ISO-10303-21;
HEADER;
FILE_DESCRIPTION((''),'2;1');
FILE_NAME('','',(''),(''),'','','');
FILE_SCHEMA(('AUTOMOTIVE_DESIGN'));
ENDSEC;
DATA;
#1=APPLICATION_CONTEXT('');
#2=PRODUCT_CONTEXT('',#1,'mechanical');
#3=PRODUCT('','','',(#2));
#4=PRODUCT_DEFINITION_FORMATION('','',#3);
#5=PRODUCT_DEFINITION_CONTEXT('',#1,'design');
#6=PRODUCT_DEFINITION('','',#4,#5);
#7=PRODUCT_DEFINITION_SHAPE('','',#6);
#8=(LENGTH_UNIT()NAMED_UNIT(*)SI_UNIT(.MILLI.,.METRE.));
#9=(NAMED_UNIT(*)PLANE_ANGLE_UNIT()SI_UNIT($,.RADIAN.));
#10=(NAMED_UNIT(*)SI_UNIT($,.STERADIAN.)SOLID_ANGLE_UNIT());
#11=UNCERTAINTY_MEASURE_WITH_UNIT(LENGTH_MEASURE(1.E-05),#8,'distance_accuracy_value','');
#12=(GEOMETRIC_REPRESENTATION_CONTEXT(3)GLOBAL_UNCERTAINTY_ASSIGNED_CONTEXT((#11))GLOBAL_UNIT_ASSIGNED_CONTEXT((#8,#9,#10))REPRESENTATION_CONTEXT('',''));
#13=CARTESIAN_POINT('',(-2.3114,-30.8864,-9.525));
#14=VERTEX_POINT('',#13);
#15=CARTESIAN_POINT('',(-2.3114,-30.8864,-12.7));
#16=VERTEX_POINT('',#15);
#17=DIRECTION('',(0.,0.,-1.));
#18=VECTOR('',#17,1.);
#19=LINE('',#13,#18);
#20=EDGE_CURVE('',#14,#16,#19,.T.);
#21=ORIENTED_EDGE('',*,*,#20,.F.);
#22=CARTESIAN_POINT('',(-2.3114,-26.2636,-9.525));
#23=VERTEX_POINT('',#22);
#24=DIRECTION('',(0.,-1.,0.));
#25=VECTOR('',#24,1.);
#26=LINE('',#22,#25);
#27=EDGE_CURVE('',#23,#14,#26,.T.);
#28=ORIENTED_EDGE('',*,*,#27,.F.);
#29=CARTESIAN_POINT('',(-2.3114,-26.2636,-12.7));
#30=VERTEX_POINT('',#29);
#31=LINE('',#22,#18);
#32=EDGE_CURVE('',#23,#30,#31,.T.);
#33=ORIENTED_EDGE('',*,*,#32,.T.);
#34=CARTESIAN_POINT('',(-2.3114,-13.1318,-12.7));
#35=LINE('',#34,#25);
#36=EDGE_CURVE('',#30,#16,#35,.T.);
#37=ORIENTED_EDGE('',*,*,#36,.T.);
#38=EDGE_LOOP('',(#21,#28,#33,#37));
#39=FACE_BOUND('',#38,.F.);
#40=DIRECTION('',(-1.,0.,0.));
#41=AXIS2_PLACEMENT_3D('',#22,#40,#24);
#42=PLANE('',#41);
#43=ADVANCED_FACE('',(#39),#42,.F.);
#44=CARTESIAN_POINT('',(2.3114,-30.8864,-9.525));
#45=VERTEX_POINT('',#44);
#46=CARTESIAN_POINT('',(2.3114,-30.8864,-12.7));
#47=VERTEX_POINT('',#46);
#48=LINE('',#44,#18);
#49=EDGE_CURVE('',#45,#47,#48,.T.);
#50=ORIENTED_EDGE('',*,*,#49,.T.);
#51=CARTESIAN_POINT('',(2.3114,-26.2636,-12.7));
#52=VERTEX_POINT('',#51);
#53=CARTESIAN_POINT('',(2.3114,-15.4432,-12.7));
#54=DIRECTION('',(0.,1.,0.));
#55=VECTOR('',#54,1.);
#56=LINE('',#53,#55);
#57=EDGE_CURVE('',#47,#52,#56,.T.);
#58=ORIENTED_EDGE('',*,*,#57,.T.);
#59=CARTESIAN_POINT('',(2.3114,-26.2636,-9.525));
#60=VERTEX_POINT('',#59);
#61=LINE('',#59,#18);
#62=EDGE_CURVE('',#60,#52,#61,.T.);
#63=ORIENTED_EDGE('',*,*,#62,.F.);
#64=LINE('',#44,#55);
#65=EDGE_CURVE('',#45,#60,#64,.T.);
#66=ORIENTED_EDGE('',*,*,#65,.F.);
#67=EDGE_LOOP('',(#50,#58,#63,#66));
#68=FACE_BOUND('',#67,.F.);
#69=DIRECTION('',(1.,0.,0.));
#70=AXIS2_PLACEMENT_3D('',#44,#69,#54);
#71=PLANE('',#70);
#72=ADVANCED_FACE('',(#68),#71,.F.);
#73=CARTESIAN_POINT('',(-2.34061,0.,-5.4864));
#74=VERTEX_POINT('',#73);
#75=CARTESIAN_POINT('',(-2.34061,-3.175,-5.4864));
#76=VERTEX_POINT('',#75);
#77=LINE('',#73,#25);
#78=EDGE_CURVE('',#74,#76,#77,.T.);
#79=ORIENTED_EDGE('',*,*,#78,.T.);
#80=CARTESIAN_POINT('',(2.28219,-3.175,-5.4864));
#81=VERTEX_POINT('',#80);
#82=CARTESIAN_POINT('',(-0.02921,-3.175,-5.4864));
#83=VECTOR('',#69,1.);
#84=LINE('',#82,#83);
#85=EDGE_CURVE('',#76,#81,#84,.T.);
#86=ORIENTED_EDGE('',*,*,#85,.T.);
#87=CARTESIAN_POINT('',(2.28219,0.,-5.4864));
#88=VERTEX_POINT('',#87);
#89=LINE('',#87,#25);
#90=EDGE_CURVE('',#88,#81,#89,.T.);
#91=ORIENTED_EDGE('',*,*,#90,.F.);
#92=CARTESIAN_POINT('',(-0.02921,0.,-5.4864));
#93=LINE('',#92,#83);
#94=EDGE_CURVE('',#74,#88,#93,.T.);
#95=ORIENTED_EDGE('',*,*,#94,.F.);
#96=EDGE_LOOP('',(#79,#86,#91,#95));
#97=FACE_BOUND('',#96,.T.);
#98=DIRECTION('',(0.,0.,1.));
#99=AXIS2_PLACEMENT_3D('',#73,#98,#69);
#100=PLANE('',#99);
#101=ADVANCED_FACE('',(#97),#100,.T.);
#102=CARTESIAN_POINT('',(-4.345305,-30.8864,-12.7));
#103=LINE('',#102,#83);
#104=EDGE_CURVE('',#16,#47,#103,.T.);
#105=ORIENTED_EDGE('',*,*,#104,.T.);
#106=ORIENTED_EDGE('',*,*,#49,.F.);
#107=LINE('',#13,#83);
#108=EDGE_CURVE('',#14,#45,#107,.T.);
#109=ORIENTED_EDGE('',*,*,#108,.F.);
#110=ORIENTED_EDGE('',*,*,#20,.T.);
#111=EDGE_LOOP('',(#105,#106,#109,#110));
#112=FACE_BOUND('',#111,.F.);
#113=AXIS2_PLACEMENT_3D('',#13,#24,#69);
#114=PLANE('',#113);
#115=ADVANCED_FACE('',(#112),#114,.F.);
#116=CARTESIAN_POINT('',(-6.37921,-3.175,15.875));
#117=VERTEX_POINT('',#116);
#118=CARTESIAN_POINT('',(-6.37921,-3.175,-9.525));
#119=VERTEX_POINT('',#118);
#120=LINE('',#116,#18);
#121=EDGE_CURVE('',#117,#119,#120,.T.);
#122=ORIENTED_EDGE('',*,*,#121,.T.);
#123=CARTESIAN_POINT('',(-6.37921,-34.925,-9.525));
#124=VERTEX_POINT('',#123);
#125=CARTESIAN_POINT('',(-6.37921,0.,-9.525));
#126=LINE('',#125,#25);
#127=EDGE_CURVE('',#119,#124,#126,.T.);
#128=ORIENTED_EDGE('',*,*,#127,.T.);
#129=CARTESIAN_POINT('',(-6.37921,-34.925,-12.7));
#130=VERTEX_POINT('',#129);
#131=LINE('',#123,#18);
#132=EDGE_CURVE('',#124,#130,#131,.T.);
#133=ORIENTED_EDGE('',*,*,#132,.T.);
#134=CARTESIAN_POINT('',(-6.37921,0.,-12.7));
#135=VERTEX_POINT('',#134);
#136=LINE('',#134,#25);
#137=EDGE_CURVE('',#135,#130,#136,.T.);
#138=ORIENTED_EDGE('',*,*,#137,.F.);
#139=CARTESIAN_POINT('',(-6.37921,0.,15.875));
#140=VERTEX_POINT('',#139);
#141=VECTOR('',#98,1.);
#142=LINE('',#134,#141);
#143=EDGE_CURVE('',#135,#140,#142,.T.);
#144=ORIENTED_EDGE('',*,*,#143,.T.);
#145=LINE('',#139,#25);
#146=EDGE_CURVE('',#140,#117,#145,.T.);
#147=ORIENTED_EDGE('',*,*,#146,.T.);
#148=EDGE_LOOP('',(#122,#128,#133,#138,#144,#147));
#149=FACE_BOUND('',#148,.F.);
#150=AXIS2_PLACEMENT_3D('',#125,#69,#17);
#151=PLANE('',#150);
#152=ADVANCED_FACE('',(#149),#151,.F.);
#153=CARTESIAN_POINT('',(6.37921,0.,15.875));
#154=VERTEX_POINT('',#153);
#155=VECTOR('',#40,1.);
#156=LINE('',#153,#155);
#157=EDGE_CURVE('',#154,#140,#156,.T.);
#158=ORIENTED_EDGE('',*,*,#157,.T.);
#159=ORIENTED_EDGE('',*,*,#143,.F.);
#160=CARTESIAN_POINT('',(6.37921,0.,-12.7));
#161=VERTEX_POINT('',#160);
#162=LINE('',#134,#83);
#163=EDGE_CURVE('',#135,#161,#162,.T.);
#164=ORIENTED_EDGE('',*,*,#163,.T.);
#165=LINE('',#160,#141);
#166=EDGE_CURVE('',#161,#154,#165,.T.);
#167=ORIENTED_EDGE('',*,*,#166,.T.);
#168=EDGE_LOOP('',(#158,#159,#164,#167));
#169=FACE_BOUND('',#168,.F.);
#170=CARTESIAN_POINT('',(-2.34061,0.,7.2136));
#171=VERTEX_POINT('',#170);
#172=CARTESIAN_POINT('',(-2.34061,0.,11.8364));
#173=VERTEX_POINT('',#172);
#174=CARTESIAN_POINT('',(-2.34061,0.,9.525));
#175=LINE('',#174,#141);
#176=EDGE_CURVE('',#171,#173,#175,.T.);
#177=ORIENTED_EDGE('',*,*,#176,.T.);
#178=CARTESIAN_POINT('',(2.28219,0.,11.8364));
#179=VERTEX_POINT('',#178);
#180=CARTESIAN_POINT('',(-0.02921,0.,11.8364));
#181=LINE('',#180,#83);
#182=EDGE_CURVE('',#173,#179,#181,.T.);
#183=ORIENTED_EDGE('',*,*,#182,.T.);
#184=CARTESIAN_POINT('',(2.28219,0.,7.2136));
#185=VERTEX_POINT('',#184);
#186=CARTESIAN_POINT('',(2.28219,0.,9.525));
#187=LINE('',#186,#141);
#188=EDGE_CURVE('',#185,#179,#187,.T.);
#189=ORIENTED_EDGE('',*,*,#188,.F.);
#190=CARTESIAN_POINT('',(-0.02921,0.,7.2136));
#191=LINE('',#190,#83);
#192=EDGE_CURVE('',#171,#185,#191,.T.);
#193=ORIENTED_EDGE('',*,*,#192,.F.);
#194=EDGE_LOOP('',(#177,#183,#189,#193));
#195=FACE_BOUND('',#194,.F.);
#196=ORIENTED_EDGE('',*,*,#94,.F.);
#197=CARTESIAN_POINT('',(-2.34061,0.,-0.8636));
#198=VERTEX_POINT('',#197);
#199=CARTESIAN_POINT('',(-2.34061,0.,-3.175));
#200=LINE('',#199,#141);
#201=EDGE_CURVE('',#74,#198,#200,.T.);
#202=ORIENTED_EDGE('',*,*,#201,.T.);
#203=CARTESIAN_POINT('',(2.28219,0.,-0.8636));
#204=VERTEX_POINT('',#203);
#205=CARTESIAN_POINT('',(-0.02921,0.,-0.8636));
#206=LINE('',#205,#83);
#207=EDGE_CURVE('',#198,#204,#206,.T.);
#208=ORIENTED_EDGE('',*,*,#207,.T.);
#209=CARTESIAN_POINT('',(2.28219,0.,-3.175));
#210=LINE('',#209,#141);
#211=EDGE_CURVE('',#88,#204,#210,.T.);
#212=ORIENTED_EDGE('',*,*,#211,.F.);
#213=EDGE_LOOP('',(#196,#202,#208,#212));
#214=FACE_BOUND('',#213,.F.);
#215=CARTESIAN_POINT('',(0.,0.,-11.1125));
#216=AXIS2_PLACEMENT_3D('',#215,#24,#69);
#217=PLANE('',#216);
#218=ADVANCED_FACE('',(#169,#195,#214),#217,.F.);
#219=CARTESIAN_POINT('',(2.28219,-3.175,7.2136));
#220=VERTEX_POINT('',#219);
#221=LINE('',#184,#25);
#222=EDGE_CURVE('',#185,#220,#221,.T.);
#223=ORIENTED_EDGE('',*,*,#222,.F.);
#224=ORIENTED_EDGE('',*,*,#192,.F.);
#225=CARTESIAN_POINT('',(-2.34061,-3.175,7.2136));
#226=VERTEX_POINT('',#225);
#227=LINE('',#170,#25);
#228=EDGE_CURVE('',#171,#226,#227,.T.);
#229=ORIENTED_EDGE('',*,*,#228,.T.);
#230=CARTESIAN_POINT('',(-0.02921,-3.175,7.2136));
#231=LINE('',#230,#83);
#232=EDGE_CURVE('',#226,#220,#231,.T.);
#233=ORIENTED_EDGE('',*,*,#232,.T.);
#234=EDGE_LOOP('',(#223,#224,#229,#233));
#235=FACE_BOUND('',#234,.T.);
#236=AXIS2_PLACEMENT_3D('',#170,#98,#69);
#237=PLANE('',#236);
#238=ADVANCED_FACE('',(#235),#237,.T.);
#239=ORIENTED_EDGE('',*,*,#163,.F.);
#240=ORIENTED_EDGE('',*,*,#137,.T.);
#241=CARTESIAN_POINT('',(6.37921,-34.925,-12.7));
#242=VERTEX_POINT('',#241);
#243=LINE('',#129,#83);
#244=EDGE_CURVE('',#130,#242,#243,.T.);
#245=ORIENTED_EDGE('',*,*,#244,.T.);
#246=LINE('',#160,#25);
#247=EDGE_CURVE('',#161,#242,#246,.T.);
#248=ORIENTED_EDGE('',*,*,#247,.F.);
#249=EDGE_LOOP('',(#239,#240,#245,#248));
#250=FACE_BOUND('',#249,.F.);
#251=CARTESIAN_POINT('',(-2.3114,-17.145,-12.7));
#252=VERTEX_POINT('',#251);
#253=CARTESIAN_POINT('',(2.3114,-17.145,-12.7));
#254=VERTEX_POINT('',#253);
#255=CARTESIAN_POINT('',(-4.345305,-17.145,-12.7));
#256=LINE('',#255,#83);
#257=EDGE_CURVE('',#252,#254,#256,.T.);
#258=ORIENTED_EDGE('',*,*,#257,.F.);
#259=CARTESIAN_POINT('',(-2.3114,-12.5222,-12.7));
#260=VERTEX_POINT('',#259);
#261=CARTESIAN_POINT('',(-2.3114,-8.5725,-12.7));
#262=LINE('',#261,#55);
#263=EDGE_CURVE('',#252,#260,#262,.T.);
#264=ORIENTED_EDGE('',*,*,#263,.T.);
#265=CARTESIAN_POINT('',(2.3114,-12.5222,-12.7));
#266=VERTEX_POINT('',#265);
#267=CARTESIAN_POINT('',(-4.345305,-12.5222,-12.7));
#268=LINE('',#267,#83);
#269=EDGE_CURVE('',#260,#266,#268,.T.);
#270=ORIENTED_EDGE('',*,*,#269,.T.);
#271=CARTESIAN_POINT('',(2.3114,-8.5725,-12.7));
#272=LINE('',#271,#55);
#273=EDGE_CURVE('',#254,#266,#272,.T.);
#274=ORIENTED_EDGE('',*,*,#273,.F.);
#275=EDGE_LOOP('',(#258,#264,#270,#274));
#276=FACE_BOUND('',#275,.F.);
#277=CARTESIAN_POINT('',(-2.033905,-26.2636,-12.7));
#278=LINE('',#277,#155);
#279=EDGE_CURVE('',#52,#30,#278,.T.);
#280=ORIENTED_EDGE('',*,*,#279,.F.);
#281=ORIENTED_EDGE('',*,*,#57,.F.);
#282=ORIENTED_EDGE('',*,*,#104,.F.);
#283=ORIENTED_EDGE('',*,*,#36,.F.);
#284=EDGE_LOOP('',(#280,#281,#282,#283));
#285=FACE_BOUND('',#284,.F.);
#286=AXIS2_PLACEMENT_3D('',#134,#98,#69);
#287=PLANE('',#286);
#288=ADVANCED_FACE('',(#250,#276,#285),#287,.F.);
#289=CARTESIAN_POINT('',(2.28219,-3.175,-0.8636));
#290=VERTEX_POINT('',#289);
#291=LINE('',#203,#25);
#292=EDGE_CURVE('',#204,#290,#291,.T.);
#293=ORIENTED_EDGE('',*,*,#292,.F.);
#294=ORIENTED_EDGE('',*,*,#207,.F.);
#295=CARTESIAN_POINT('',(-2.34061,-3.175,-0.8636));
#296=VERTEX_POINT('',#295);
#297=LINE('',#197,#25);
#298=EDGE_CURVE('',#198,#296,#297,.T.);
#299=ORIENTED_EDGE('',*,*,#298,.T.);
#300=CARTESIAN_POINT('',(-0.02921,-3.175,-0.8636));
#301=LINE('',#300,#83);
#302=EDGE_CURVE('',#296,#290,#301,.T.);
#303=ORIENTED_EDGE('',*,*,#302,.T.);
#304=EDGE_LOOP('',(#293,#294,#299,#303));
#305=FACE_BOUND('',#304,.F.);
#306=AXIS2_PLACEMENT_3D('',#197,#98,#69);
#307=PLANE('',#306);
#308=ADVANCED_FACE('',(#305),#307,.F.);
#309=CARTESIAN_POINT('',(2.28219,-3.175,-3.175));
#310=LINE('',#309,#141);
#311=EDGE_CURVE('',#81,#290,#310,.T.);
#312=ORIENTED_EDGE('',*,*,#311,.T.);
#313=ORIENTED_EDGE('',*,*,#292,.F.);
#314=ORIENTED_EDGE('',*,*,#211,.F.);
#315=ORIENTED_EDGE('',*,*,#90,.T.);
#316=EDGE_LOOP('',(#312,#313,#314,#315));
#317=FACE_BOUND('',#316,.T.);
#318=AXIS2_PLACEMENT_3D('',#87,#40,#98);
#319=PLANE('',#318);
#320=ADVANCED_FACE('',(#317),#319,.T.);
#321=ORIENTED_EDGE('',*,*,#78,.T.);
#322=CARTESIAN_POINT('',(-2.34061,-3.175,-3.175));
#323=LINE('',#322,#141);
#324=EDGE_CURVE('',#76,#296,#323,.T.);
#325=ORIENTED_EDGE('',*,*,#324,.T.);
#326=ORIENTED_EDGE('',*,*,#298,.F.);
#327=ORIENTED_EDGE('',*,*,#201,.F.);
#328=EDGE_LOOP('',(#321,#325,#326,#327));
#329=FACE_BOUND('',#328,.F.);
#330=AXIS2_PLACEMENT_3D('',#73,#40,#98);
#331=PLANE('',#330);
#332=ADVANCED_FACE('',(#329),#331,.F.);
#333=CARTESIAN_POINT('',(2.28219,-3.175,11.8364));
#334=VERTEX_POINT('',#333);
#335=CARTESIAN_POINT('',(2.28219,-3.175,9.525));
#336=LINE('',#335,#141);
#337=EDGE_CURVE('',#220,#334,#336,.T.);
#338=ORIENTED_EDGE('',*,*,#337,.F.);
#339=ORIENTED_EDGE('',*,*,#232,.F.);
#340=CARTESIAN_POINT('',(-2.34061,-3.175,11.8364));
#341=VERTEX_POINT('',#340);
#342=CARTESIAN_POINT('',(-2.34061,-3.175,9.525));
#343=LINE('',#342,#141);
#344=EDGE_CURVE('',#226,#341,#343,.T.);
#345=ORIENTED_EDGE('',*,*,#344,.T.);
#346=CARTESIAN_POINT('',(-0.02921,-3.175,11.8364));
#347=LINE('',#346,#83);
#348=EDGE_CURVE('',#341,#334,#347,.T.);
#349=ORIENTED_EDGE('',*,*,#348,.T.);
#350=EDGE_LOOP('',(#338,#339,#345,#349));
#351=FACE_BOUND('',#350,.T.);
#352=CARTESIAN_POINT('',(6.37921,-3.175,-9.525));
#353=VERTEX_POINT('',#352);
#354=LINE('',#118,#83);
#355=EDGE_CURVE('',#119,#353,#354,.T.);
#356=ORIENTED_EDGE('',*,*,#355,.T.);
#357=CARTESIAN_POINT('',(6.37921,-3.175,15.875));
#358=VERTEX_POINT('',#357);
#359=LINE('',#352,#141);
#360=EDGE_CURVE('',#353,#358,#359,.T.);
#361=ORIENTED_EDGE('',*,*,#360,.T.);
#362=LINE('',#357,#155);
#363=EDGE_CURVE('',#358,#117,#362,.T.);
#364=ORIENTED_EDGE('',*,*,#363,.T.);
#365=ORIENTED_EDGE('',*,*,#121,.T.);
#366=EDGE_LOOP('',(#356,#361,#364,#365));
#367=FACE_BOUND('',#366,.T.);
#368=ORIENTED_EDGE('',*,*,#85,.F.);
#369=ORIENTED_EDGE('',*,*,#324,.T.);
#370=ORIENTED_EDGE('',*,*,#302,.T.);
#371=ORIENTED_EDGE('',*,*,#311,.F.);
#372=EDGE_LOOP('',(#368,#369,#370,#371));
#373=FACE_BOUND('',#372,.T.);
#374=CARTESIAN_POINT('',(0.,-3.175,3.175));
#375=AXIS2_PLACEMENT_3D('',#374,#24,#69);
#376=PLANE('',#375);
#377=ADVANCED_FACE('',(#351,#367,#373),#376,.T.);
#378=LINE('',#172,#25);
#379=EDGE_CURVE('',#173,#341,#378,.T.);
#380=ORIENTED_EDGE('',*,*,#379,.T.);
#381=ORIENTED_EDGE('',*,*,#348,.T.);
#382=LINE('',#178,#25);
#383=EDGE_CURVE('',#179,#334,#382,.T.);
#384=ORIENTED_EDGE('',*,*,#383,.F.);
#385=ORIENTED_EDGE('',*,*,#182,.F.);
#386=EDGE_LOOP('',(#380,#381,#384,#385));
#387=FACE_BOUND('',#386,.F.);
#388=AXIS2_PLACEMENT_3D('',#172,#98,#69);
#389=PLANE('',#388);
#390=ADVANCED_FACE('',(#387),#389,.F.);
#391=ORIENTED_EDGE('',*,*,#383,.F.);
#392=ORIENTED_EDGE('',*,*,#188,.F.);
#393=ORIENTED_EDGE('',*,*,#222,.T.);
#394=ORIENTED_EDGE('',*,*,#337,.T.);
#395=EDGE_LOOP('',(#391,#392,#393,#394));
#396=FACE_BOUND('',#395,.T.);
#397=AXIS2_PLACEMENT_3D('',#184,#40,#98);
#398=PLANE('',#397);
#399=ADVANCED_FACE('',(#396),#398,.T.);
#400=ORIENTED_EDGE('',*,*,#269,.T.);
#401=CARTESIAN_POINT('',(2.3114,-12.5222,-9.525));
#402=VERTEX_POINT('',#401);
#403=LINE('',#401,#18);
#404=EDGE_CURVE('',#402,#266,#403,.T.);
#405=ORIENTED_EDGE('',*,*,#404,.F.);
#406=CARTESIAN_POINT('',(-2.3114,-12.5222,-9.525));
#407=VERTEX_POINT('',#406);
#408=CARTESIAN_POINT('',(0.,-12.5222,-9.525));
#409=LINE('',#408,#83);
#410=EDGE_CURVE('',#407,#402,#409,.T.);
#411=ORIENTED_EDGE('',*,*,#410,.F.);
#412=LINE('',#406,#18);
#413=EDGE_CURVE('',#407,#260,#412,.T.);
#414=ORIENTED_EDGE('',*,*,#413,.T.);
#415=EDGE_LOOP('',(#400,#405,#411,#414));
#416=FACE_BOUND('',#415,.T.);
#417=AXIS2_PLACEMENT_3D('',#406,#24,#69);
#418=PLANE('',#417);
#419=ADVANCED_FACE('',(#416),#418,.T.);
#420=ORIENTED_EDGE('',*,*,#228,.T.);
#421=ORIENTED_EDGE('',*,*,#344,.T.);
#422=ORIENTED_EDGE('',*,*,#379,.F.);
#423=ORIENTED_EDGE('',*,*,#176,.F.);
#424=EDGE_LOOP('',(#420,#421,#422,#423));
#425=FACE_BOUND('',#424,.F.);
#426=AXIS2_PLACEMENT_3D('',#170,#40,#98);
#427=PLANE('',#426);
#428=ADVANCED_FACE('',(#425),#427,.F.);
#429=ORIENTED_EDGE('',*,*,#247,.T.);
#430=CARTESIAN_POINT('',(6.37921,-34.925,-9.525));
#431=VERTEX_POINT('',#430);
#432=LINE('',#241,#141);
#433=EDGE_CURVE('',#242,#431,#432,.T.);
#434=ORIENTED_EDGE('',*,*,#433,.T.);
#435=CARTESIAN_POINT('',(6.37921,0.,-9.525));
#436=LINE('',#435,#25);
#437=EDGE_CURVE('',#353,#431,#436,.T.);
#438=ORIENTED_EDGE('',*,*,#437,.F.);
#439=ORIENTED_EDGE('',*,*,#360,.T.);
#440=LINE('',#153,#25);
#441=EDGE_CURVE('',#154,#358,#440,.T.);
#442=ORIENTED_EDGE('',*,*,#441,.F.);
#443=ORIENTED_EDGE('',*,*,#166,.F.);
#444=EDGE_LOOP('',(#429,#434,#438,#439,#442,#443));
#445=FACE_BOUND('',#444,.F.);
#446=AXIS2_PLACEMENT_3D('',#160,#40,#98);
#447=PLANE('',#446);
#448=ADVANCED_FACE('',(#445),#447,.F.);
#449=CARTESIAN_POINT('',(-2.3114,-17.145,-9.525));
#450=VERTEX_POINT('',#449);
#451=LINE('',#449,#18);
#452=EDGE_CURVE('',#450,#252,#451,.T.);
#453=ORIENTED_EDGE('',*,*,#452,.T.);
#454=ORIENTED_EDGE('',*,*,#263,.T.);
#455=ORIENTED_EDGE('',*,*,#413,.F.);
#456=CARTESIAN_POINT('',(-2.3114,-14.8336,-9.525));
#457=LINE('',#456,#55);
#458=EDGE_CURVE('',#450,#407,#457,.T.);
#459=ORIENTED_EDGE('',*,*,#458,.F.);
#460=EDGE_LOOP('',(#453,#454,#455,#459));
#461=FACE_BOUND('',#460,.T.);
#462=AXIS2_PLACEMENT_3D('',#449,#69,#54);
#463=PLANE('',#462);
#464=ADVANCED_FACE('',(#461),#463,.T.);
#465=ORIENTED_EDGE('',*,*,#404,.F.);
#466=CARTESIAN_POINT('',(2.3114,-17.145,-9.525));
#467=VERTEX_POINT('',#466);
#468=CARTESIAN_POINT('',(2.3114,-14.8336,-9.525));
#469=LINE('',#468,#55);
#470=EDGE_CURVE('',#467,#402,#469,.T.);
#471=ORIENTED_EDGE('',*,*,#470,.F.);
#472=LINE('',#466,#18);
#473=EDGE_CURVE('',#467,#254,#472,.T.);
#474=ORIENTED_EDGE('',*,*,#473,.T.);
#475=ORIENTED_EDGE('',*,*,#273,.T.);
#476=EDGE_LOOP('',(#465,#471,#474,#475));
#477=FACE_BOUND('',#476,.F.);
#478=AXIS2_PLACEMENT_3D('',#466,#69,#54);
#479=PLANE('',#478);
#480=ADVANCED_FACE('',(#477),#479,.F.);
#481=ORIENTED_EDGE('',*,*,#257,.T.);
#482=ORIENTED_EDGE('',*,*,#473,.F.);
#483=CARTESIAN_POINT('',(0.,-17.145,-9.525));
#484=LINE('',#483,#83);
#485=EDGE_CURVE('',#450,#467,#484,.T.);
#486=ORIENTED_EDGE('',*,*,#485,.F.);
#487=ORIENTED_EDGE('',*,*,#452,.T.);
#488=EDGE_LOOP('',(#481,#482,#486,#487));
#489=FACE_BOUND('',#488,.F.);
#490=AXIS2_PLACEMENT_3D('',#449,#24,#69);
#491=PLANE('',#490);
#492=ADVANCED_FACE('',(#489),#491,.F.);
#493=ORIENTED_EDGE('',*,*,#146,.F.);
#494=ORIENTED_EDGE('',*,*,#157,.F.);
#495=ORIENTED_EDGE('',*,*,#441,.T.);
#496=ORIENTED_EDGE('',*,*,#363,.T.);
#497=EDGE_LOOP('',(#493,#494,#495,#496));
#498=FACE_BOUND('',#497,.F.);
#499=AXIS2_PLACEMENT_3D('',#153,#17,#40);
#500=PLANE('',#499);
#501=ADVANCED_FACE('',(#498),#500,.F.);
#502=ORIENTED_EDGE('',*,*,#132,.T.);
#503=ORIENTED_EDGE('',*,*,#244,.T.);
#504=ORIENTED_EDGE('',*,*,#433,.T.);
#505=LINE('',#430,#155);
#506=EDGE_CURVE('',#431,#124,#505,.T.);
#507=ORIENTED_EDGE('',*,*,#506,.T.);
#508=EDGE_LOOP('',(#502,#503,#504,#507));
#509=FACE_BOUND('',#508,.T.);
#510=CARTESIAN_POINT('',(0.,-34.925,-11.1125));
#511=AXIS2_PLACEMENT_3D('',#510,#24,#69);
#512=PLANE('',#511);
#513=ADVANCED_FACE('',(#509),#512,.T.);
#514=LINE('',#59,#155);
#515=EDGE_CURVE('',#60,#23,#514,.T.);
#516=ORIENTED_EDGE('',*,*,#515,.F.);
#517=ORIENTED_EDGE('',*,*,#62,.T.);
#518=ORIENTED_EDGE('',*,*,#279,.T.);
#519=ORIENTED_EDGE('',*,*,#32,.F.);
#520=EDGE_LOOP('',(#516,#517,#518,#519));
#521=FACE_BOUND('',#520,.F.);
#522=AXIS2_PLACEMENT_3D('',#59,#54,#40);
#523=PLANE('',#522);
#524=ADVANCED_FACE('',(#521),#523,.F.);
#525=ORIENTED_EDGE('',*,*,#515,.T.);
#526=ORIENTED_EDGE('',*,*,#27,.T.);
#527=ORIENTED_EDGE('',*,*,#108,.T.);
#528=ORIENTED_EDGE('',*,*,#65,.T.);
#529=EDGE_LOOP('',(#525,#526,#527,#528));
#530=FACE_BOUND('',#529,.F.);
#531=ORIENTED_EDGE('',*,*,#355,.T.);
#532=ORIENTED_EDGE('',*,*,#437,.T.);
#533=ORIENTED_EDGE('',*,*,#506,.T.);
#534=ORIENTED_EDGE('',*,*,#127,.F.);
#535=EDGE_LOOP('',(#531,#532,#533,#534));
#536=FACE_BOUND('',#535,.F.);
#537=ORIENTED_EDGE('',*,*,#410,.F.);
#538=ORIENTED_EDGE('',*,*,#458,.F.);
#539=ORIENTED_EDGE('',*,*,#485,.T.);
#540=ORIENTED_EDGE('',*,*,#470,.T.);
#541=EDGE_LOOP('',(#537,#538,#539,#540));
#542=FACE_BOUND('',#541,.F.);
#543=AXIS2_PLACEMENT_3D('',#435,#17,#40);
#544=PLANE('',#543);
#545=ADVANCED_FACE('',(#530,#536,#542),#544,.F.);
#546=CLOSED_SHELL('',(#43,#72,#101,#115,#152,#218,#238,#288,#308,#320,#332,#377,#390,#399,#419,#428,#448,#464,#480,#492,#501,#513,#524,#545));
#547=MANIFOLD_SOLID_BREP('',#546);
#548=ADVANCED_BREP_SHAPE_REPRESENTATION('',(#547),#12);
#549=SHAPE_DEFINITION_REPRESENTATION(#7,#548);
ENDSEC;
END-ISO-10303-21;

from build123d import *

# Parameters (mm, degrees)
F0_W     = 4.6228
F0_H     = 4.6228
F1_DEPTH = 3.175
F2_DEPTH = 34.925
F3_W     = 4.6228
F3_H     = 4.6228
F4_DEPTH = 25.4


with BuildPart() as f1:
    # F0 (on Front) → F1 (new body)
    with BuildSketch(Plane.XZ):
        Polygon((6.37921, -9.525), (6.37921, 15.875), (-6.37921, 15.875), (-6.37921, -9.525), (-1.8334548599, -9.525), align=None)
        with Locations((-0.02921, -3.175)):
            Rectangle(F0_W, F0_H, mode=Mode.SUBTRACT)
        with Locations((-0.02921, 9.525)):
            Rectangle(F0_W, F0_H, mode=Mode.SUBTRACT)
    extrude(amount=F1_DEPTH)

    # F0 (on Front) → F2 (join)
    with BuildSketch(Plane.XZ):
        Polygon((6.37921, -12.7), (6.37921, -9.525), (-1.8334548599, -9.525), (-6.37921, -9.525), (-6.37921, -12.7), (2.7123002801, -12.7), align=None)
    extrude(amount=F2_DEPTH)

    # F3 (on face) → F4 (cut)
    with BuildSketch(Plane.XY.offset(-9.525)):
        with Locations((0, -14.8336)):
            Rectangle(F3_W, F3_H)
        Polygon((-2.3114, -30.8864), (0, -30.8864), (2.3114, -30.8864), (2.3114, -26.2636), (-2.3114, -26.2636), align=None)
    extrude(amount=-F4_DEPTH, mode=Mode.SUBTRACT)


solid = f1.part
